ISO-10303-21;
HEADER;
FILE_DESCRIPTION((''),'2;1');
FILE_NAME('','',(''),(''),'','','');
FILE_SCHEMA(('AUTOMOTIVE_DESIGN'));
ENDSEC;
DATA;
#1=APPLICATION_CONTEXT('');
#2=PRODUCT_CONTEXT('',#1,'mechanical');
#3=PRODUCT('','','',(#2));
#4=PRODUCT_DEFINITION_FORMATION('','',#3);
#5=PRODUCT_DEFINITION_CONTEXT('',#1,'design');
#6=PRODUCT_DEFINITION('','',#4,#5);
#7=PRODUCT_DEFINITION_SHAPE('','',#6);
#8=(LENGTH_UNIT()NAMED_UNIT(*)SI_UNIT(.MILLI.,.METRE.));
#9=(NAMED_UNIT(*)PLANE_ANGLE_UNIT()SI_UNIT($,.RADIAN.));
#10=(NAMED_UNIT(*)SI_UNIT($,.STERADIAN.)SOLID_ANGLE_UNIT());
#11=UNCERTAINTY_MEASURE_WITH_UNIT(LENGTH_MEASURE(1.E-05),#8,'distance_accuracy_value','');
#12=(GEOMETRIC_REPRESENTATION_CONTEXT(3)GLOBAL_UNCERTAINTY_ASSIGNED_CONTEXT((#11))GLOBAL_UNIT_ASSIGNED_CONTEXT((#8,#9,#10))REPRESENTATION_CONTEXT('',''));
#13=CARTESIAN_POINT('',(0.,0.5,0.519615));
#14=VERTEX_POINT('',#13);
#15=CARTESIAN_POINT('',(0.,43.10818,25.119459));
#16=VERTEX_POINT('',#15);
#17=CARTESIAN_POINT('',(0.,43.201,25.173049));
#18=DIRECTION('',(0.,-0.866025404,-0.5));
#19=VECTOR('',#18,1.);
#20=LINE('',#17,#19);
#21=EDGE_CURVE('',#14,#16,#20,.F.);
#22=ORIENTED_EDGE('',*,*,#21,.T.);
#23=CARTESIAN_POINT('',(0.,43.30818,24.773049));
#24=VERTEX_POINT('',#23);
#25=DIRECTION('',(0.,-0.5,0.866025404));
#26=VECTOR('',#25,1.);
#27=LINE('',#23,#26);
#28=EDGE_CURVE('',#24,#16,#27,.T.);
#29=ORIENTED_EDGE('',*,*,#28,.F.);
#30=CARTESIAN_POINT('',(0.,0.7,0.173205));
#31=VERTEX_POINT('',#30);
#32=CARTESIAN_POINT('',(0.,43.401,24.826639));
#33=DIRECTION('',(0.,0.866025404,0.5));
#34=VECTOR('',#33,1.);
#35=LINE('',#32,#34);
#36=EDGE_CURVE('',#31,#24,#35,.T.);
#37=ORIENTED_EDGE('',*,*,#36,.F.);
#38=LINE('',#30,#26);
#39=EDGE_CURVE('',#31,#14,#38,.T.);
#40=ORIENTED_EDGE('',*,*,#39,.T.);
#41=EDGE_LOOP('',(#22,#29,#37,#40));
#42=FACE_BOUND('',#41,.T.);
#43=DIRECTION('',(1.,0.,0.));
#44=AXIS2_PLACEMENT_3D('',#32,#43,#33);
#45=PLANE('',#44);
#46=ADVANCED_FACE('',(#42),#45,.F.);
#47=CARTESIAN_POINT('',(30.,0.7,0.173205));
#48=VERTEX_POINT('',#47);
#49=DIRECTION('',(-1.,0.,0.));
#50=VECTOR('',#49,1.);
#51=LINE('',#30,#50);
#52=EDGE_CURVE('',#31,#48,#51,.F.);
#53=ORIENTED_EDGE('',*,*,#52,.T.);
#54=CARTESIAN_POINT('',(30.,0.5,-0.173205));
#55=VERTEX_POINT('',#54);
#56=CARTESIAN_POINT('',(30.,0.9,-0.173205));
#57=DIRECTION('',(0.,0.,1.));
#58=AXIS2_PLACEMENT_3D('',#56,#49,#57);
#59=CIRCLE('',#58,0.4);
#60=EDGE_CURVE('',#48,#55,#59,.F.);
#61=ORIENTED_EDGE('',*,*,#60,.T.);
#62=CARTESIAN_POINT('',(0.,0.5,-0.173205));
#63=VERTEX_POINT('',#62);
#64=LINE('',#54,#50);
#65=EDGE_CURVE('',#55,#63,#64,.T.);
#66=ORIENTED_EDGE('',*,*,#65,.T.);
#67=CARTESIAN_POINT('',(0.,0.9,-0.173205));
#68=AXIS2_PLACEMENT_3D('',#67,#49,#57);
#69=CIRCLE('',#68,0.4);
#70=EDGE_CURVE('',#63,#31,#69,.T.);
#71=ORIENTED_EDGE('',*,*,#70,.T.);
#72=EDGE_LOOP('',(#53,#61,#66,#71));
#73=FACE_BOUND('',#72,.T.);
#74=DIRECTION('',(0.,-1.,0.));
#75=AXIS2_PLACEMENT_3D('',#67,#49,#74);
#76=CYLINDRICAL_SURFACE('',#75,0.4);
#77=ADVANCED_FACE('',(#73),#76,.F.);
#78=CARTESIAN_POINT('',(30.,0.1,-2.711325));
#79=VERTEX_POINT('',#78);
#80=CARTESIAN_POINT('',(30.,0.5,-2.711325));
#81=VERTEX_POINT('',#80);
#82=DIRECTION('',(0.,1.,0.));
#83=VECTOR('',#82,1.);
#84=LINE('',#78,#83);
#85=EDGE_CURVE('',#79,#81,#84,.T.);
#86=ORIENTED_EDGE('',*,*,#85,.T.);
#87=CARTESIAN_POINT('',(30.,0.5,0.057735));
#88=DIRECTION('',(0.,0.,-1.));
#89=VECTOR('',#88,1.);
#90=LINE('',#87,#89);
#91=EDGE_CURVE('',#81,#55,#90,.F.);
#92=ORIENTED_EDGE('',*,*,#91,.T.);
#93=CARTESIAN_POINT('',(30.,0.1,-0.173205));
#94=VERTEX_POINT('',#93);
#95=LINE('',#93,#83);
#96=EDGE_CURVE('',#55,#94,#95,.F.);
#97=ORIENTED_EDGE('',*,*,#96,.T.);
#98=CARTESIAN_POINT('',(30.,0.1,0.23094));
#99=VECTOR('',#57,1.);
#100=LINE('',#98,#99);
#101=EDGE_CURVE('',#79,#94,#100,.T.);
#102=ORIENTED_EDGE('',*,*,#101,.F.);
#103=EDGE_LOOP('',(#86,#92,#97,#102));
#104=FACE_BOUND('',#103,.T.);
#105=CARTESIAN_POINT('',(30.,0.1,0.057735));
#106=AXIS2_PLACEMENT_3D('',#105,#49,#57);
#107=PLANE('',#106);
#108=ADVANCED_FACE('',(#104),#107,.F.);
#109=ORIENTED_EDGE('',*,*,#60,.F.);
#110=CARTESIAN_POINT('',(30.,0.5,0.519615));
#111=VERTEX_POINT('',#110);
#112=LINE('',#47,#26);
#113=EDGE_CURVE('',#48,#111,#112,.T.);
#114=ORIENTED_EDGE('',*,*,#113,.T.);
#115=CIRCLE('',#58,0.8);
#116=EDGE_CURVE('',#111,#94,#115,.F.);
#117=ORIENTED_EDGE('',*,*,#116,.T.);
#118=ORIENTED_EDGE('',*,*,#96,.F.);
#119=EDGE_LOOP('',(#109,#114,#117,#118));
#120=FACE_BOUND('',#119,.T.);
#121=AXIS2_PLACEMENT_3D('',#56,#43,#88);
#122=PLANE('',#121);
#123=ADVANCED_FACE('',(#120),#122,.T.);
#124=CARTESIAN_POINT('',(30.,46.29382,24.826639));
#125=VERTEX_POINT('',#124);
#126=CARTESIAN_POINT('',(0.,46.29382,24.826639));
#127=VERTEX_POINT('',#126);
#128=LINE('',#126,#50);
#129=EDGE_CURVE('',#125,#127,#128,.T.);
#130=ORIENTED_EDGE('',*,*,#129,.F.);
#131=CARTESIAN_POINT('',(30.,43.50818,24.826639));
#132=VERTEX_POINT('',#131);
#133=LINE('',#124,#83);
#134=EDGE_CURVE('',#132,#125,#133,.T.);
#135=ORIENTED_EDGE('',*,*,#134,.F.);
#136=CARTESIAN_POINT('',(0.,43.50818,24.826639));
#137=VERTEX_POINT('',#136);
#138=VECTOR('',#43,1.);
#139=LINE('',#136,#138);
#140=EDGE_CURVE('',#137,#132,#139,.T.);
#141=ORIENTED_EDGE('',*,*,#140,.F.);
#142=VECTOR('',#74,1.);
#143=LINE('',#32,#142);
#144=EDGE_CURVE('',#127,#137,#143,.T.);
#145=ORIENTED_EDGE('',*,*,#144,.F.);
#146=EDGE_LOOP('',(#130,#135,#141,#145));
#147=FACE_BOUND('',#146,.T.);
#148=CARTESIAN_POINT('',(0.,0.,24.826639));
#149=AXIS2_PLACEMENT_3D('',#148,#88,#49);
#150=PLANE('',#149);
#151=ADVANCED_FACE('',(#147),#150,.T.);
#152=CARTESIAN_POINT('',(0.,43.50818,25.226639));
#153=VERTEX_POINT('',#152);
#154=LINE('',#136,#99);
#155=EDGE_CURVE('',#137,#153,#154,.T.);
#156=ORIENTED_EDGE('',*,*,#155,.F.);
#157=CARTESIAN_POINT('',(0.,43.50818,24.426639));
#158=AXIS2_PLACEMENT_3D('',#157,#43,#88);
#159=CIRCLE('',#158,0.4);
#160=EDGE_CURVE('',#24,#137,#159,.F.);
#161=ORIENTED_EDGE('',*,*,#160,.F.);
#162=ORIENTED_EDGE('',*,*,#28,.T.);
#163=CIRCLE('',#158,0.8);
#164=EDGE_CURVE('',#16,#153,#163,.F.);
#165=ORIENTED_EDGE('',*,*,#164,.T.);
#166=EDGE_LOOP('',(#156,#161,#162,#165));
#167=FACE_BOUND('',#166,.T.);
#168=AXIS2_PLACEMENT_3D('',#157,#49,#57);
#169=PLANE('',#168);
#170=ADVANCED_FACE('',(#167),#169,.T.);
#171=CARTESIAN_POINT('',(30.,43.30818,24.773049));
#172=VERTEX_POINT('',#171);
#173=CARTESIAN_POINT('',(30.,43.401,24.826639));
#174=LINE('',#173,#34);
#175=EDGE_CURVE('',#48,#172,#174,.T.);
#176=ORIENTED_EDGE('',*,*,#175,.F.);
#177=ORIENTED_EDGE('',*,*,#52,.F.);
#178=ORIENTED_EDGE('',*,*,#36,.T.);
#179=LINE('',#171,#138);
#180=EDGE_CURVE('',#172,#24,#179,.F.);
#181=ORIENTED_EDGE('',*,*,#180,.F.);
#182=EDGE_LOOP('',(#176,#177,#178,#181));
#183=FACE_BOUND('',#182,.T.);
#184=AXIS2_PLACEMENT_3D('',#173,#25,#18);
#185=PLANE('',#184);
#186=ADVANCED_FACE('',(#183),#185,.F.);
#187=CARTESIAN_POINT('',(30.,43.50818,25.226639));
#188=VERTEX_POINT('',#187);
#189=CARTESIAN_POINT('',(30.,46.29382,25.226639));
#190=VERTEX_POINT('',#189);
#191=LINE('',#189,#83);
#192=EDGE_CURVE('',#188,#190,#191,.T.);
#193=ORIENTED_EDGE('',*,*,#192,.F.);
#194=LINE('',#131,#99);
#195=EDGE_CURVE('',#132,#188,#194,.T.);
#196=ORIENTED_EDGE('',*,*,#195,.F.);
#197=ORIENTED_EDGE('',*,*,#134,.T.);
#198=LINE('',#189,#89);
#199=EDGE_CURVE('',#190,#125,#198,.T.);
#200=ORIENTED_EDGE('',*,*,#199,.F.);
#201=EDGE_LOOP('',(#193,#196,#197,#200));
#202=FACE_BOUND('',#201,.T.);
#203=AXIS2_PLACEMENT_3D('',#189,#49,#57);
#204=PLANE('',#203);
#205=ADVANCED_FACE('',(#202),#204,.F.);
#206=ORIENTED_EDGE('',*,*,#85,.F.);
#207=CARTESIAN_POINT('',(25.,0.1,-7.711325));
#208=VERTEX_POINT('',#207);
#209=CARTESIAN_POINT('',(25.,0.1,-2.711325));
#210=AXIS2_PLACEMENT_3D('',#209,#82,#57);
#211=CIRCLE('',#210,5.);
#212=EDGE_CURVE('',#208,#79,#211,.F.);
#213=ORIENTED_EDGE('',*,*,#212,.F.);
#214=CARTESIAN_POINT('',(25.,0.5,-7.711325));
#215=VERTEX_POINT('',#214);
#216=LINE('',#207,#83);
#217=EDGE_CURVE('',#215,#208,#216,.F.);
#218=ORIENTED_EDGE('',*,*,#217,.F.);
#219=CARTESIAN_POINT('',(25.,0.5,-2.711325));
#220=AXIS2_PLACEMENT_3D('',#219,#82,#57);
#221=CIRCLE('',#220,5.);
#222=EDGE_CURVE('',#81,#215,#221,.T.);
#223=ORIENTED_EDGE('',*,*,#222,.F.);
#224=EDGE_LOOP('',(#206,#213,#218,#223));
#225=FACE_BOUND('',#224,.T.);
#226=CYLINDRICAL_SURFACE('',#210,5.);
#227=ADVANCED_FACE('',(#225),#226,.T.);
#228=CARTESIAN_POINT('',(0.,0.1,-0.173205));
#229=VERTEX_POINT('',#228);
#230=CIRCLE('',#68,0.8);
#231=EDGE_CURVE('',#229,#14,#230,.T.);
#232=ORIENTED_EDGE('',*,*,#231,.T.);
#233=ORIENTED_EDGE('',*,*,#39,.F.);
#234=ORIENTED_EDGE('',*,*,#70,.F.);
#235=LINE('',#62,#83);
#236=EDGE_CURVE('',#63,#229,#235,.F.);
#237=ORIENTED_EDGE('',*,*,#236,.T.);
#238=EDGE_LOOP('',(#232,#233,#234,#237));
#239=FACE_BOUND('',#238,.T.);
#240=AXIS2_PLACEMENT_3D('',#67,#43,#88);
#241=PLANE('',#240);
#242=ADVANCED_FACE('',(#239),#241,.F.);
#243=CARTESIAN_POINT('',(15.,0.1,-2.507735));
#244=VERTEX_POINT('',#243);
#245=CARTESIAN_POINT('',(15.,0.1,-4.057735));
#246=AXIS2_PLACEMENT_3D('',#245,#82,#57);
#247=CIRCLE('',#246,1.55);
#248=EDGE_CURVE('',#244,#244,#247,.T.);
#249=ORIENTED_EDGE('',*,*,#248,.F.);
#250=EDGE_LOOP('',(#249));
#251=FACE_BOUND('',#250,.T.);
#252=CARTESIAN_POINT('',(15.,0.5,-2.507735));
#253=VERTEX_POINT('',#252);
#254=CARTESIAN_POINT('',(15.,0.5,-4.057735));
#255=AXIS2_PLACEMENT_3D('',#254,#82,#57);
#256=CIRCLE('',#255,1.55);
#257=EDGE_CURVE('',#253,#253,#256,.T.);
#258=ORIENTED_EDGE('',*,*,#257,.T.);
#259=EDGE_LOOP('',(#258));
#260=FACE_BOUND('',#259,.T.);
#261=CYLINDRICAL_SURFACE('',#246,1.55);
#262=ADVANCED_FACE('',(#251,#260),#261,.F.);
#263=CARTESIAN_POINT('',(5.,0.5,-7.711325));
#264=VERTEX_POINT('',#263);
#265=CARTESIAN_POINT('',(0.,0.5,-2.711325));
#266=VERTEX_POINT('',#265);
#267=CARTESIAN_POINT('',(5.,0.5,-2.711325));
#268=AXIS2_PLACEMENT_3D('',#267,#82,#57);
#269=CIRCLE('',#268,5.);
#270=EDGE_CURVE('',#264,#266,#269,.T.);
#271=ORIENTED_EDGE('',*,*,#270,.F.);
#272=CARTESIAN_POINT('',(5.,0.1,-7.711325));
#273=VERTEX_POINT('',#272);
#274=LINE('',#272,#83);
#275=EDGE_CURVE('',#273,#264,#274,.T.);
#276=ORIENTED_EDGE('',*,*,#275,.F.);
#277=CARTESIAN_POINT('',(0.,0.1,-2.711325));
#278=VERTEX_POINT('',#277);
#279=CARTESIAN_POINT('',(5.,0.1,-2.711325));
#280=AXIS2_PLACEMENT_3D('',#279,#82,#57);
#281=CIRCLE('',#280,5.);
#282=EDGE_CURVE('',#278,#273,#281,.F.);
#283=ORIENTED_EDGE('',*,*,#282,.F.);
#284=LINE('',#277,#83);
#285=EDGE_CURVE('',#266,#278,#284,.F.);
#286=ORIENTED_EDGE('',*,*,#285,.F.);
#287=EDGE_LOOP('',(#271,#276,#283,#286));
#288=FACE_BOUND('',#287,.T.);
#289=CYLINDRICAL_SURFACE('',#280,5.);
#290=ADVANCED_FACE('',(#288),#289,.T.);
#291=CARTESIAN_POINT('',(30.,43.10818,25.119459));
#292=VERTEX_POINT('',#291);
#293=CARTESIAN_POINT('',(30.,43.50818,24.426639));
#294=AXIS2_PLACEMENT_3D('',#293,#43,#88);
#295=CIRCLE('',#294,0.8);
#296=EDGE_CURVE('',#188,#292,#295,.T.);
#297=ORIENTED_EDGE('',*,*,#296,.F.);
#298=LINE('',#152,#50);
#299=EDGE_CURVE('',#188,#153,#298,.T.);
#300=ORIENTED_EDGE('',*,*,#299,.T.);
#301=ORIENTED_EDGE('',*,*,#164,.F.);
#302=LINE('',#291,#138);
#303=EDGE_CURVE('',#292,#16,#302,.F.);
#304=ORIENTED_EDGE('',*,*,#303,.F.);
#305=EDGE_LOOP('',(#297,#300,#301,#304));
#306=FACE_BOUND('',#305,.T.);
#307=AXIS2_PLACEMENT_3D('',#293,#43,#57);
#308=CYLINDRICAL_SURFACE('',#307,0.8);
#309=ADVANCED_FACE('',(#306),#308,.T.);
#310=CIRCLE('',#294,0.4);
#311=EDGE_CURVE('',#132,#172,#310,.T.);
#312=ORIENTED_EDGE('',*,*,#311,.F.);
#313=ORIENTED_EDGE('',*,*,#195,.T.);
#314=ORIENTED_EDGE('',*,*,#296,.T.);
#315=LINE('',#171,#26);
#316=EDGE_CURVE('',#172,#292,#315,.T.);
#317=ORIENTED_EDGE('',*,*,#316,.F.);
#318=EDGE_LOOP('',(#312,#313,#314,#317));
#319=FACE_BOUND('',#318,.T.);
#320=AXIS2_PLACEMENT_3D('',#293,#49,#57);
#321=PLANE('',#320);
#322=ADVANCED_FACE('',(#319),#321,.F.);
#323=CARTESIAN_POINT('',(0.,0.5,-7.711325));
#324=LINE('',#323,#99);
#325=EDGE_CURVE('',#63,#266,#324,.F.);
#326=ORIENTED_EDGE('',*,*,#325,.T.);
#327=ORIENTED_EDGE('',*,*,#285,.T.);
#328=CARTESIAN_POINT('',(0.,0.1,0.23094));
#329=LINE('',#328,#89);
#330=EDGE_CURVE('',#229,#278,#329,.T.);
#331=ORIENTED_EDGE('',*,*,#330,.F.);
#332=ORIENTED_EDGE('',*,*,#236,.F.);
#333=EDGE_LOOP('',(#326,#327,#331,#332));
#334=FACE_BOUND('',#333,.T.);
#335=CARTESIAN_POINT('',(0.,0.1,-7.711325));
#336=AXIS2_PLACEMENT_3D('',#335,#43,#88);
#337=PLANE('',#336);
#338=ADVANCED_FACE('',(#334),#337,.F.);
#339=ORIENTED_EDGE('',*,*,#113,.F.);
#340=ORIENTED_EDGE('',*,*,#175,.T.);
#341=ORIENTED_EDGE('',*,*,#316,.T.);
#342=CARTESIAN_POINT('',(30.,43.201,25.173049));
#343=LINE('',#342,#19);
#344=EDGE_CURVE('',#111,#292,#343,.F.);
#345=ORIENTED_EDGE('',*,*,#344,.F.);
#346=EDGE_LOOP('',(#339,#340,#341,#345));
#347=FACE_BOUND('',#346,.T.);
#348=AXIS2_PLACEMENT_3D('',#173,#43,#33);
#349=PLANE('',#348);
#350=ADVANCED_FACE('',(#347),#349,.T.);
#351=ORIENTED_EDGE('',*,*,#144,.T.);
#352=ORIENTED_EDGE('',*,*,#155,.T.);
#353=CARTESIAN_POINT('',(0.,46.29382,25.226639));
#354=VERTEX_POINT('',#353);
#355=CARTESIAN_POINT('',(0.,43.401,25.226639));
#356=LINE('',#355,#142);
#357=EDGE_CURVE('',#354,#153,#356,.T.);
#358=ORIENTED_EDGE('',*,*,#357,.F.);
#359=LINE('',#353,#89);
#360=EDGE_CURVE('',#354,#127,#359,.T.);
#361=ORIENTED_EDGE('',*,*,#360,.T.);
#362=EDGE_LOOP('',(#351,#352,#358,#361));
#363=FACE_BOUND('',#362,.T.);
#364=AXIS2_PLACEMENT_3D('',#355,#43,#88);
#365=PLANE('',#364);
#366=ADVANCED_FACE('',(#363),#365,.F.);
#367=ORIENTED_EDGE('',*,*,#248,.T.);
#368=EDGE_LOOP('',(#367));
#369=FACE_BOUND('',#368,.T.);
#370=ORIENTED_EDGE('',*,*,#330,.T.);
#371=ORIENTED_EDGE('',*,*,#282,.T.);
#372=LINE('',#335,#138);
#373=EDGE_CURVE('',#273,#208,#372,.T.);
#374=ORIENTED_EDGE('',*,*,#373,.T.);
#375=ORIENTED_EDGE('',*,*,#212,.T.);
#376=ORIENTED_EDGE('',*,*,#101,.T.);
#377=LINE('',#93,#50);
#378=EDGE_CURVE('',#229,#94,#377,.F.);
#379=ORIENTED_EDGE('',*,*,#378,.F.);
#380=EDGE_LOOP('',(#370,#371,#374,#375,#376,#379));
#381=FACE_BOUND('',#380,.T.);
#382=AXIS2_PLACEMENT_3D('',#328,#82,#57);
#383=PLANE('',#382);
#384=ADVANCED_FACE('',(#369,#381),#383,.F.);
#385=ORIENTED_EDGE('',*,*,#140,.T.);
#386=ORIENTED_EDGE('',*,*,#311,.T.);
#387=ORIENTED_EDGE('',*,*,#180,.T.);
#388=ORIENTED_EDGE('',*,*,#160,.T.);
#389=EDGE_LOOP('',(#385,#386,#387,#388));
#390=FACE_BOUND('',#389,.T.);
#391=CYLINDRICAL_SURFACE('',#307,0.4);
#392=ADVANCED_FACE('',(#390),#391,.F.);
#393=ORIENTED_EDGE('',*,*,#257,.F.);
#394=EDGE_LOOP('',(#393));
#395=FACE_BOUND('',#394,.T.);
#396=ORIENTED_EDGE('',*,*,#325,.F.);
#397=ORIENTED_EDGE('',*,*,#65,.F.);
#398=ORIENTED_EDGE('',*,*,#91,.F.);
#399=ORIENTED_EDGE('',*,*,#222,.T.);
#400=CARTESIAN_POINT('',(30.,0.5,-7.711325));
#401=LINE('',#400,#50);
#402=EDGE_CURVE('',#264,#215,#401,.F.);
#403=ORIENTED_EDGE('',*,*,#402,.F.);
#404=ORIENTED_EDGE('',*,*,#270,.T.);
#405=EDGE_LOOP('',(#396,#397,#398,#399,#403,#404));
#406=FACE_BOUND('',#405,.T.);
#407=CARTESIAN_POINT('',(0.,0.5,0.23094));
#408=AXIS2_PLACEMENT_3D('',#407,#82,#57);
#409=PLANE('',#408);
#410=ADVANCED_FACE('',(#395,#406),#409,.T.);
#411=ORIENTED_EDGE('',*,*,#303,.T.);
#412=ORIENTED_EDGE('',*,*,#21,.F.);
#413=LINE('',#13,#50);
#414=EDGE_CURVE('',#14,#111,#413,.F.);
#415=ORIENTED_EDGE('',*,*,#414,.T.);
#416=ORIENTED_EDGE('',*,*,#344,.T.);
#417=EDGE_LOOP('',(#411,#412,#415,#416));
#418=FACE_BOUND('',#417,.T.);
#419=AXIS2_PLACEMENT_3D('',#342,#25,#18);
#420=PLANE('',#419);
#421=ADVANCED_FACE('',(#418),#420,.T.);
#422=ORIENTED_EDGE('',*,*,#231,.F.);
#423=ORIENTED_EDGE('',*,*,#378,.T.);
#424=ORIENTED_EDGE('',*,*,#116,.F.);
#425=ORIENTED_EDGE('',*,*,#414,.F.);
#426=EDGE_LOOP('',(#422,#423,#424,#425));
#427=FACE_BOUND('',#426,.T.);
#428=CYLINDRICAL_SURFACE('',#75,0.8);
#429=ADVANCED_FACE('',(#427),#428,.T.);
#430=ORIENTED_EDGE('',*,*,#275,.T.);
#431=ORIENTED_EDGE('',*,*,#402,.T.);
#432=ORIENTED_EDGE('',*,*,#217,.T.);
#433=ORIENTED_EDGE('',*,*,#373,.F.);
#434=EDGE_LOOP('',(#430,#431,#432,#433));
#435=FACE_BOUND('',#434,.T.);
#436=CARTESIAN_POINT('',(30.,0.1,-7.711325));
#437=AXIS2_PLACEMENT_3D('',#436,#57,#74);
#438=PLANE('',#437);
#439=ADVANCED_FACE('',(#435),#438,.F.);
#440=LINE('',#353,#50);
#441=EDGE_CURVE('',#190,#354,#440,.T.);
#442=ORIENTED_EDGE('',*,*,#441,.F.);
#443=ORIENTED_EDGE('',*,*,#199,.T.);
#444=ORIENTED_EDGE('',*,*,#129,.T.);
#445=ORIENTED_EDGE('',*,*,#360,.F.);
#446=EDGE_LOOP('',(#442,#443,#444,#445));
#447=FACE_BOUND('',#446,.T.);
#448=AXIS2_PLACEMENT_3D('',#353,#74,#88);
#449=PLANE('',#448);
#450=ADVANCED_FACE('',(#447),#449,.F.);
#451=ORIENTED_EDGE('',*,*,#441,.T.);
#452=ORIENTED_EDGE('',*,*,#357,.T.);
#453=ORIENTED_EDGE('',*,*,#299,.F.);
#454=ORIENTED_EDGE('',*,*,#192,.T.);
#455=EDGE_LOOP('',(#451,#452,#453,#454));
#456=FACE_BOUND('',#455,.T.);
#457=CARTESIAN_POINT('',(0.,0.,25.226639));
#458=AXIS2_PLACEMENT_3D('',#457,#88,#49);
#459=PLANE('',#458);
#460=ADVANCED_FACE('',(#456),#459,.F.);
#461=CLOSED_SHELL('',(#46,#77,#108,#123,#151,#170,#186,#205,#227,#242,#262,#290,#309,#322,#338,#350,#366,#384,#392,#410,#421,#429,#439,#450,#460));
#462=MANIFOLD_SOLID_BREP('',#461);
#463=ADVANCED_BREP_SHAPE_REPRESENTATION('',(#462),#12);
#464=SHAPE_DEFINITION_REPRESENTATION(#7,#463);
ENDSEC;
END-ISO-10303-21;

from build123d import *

# Parameters (mm, degrees)
BOSS_EXTRUDE1_DEPTH          = 30
EDGE_FLANGE1_DEPTH           = 30
EDGE_FLANGE1_2_DEPTH         = 30
EDGE_FLANGE2_STRIP_CUT_DEPTH = 30
EDGE_FLANGE2_DEPTH           = 30
SKETCH12_R                   = 1.55
CUT_EXTRUDE1_DEPTH           = 61.278165958
FILLET1_R                    = 5


# Read off the part's stored shape, not the designer's step: Edge-Flange1
# Sheet-metal steps are written as plain solids
with BuildPart() as part:
    # Sketch1 → Boss-Extrude1 (new body)
    with BuildSketch(Plane(origin=(0, 0, 0), x_dir=(0, 0, -1), z_dir=(1, 0, 0))):
        Polygon((-24.826638925, 43.401), (-25.173049087, 43.201), (-0.173205081, -0.1), (0.173205081, 0.1), align=None)
    extrude(amount=BOSS_EXTRUDE1_DEPTH)

    # Edge-Flange1 outline → Edge-Flange1 (cut)
    with BuildSketch(Plane.YZ):
        with BuildLine():
            Line((-0.1, 0.173205081), (0.1, -0.173205081))
            ThreePointArc((0.1, -0.173205081), (0.207179677, 0.226794919), (0.5, 0.519615242))
            Line((0.5, 0.519615242), (-0.1, 0.173205081))
        make_face()
    extrude(amount=EDGE_FLANGE1_DEPTH, mode=Mode.SUBTRACT)

    # Edge-Flange1 2 outline → Edge-Flange1 2 (add)
    with BuildSketch(Plane.YZ):
        with BuildLine():
            Line((0.7, 0.173205081), (0.1, -0.173205081))
            Line((0.1, -0.173205081), (0.1, -7.711324865))
            Line((0.1, -7.711324865), (0.5, -7.711324865))
            Line((0.5, -7.711324865), (0.5, -0.173205081))
            ThreePointArc((0.5, -0.173205081), (0.553589838, 0.026794919), (0.7, 0.173205081))
        make_face()
    extrude(amount=EDGE_FLANGE1_2_DEPTH)

    # Edge-Flange2 strip (across the edge) → Edge-Flange2 strip cut (cut)
    with BuildSketch(Plane(origin=(0, 43.401, 24.826638925), x_dir=(0, 0, -1), z_dir=(1, 0, 0))):
        Polygon((-1.492820323, 1.785640646), (-0.292820323, -0.292820323), (0.053589838, -0.092820323), (-1.146410162, 1.985640646), align=None)
    extrude(amount=EDGE_FLANGE2_STRIP_CUT_DEPTH, mode=Mode.SUBTRACT)

    # Edge-Flange2 section (across the edge) → Edge-Flange2 (add)
    with BuildSketch(Plane(origin=(0, 43.401, 24.826638925), x_dir=(0, 0, -1), z_dir=(1, 0, 0))):
        with BuildLine():
            Line((-0.4, 0.107179677), (-0.4, 2.892820323))
            Line((-0.4, 2.892820323), (0, 2.892820323))
            Line((0, 2.892820323), (0, 0.107179677))
            ThreePointArc((0, 0.107179677), (0.013629669, 0.003652059), (0.053589838, -0.092820323))
            Line((0.053589838, -0.092820323), (-0.292820323, -0.292820323))
            ThreePointArc((-0.292820323, -0.292820323), (-0.372740661, -0.099875559), (-0.4, 0.107179677))
        make_face()
    extrude(amount=EDGE_FLANGE2_DEPTH)

    # Sketch12 → Cut-Extrude1 (cut, through all)
    with BuildSketch(Plane(origin=(0, 0.5, 0), x_dir=(1, 0, 0), z_dir=(0, 1, 0))):
        with Locations(Location((15, 4.057735027, 0), (0, 0, 270))):
            Circle(SKETCH12_R)
    extrude(amount=-CUT_EXTRUDE1_DEPTH, mode=Mode.SUBTRACT)

    # Fillet1
    fillet1_edges = [part.edges().sort_by_distance(p)[0] for p in [
        (30, 0.3, -7.711324865),
        (0, 0.3, -7.711324865),
    ]]
    fillet(fillet1_edges, radius=FILLET1_R)


solid = part.part
